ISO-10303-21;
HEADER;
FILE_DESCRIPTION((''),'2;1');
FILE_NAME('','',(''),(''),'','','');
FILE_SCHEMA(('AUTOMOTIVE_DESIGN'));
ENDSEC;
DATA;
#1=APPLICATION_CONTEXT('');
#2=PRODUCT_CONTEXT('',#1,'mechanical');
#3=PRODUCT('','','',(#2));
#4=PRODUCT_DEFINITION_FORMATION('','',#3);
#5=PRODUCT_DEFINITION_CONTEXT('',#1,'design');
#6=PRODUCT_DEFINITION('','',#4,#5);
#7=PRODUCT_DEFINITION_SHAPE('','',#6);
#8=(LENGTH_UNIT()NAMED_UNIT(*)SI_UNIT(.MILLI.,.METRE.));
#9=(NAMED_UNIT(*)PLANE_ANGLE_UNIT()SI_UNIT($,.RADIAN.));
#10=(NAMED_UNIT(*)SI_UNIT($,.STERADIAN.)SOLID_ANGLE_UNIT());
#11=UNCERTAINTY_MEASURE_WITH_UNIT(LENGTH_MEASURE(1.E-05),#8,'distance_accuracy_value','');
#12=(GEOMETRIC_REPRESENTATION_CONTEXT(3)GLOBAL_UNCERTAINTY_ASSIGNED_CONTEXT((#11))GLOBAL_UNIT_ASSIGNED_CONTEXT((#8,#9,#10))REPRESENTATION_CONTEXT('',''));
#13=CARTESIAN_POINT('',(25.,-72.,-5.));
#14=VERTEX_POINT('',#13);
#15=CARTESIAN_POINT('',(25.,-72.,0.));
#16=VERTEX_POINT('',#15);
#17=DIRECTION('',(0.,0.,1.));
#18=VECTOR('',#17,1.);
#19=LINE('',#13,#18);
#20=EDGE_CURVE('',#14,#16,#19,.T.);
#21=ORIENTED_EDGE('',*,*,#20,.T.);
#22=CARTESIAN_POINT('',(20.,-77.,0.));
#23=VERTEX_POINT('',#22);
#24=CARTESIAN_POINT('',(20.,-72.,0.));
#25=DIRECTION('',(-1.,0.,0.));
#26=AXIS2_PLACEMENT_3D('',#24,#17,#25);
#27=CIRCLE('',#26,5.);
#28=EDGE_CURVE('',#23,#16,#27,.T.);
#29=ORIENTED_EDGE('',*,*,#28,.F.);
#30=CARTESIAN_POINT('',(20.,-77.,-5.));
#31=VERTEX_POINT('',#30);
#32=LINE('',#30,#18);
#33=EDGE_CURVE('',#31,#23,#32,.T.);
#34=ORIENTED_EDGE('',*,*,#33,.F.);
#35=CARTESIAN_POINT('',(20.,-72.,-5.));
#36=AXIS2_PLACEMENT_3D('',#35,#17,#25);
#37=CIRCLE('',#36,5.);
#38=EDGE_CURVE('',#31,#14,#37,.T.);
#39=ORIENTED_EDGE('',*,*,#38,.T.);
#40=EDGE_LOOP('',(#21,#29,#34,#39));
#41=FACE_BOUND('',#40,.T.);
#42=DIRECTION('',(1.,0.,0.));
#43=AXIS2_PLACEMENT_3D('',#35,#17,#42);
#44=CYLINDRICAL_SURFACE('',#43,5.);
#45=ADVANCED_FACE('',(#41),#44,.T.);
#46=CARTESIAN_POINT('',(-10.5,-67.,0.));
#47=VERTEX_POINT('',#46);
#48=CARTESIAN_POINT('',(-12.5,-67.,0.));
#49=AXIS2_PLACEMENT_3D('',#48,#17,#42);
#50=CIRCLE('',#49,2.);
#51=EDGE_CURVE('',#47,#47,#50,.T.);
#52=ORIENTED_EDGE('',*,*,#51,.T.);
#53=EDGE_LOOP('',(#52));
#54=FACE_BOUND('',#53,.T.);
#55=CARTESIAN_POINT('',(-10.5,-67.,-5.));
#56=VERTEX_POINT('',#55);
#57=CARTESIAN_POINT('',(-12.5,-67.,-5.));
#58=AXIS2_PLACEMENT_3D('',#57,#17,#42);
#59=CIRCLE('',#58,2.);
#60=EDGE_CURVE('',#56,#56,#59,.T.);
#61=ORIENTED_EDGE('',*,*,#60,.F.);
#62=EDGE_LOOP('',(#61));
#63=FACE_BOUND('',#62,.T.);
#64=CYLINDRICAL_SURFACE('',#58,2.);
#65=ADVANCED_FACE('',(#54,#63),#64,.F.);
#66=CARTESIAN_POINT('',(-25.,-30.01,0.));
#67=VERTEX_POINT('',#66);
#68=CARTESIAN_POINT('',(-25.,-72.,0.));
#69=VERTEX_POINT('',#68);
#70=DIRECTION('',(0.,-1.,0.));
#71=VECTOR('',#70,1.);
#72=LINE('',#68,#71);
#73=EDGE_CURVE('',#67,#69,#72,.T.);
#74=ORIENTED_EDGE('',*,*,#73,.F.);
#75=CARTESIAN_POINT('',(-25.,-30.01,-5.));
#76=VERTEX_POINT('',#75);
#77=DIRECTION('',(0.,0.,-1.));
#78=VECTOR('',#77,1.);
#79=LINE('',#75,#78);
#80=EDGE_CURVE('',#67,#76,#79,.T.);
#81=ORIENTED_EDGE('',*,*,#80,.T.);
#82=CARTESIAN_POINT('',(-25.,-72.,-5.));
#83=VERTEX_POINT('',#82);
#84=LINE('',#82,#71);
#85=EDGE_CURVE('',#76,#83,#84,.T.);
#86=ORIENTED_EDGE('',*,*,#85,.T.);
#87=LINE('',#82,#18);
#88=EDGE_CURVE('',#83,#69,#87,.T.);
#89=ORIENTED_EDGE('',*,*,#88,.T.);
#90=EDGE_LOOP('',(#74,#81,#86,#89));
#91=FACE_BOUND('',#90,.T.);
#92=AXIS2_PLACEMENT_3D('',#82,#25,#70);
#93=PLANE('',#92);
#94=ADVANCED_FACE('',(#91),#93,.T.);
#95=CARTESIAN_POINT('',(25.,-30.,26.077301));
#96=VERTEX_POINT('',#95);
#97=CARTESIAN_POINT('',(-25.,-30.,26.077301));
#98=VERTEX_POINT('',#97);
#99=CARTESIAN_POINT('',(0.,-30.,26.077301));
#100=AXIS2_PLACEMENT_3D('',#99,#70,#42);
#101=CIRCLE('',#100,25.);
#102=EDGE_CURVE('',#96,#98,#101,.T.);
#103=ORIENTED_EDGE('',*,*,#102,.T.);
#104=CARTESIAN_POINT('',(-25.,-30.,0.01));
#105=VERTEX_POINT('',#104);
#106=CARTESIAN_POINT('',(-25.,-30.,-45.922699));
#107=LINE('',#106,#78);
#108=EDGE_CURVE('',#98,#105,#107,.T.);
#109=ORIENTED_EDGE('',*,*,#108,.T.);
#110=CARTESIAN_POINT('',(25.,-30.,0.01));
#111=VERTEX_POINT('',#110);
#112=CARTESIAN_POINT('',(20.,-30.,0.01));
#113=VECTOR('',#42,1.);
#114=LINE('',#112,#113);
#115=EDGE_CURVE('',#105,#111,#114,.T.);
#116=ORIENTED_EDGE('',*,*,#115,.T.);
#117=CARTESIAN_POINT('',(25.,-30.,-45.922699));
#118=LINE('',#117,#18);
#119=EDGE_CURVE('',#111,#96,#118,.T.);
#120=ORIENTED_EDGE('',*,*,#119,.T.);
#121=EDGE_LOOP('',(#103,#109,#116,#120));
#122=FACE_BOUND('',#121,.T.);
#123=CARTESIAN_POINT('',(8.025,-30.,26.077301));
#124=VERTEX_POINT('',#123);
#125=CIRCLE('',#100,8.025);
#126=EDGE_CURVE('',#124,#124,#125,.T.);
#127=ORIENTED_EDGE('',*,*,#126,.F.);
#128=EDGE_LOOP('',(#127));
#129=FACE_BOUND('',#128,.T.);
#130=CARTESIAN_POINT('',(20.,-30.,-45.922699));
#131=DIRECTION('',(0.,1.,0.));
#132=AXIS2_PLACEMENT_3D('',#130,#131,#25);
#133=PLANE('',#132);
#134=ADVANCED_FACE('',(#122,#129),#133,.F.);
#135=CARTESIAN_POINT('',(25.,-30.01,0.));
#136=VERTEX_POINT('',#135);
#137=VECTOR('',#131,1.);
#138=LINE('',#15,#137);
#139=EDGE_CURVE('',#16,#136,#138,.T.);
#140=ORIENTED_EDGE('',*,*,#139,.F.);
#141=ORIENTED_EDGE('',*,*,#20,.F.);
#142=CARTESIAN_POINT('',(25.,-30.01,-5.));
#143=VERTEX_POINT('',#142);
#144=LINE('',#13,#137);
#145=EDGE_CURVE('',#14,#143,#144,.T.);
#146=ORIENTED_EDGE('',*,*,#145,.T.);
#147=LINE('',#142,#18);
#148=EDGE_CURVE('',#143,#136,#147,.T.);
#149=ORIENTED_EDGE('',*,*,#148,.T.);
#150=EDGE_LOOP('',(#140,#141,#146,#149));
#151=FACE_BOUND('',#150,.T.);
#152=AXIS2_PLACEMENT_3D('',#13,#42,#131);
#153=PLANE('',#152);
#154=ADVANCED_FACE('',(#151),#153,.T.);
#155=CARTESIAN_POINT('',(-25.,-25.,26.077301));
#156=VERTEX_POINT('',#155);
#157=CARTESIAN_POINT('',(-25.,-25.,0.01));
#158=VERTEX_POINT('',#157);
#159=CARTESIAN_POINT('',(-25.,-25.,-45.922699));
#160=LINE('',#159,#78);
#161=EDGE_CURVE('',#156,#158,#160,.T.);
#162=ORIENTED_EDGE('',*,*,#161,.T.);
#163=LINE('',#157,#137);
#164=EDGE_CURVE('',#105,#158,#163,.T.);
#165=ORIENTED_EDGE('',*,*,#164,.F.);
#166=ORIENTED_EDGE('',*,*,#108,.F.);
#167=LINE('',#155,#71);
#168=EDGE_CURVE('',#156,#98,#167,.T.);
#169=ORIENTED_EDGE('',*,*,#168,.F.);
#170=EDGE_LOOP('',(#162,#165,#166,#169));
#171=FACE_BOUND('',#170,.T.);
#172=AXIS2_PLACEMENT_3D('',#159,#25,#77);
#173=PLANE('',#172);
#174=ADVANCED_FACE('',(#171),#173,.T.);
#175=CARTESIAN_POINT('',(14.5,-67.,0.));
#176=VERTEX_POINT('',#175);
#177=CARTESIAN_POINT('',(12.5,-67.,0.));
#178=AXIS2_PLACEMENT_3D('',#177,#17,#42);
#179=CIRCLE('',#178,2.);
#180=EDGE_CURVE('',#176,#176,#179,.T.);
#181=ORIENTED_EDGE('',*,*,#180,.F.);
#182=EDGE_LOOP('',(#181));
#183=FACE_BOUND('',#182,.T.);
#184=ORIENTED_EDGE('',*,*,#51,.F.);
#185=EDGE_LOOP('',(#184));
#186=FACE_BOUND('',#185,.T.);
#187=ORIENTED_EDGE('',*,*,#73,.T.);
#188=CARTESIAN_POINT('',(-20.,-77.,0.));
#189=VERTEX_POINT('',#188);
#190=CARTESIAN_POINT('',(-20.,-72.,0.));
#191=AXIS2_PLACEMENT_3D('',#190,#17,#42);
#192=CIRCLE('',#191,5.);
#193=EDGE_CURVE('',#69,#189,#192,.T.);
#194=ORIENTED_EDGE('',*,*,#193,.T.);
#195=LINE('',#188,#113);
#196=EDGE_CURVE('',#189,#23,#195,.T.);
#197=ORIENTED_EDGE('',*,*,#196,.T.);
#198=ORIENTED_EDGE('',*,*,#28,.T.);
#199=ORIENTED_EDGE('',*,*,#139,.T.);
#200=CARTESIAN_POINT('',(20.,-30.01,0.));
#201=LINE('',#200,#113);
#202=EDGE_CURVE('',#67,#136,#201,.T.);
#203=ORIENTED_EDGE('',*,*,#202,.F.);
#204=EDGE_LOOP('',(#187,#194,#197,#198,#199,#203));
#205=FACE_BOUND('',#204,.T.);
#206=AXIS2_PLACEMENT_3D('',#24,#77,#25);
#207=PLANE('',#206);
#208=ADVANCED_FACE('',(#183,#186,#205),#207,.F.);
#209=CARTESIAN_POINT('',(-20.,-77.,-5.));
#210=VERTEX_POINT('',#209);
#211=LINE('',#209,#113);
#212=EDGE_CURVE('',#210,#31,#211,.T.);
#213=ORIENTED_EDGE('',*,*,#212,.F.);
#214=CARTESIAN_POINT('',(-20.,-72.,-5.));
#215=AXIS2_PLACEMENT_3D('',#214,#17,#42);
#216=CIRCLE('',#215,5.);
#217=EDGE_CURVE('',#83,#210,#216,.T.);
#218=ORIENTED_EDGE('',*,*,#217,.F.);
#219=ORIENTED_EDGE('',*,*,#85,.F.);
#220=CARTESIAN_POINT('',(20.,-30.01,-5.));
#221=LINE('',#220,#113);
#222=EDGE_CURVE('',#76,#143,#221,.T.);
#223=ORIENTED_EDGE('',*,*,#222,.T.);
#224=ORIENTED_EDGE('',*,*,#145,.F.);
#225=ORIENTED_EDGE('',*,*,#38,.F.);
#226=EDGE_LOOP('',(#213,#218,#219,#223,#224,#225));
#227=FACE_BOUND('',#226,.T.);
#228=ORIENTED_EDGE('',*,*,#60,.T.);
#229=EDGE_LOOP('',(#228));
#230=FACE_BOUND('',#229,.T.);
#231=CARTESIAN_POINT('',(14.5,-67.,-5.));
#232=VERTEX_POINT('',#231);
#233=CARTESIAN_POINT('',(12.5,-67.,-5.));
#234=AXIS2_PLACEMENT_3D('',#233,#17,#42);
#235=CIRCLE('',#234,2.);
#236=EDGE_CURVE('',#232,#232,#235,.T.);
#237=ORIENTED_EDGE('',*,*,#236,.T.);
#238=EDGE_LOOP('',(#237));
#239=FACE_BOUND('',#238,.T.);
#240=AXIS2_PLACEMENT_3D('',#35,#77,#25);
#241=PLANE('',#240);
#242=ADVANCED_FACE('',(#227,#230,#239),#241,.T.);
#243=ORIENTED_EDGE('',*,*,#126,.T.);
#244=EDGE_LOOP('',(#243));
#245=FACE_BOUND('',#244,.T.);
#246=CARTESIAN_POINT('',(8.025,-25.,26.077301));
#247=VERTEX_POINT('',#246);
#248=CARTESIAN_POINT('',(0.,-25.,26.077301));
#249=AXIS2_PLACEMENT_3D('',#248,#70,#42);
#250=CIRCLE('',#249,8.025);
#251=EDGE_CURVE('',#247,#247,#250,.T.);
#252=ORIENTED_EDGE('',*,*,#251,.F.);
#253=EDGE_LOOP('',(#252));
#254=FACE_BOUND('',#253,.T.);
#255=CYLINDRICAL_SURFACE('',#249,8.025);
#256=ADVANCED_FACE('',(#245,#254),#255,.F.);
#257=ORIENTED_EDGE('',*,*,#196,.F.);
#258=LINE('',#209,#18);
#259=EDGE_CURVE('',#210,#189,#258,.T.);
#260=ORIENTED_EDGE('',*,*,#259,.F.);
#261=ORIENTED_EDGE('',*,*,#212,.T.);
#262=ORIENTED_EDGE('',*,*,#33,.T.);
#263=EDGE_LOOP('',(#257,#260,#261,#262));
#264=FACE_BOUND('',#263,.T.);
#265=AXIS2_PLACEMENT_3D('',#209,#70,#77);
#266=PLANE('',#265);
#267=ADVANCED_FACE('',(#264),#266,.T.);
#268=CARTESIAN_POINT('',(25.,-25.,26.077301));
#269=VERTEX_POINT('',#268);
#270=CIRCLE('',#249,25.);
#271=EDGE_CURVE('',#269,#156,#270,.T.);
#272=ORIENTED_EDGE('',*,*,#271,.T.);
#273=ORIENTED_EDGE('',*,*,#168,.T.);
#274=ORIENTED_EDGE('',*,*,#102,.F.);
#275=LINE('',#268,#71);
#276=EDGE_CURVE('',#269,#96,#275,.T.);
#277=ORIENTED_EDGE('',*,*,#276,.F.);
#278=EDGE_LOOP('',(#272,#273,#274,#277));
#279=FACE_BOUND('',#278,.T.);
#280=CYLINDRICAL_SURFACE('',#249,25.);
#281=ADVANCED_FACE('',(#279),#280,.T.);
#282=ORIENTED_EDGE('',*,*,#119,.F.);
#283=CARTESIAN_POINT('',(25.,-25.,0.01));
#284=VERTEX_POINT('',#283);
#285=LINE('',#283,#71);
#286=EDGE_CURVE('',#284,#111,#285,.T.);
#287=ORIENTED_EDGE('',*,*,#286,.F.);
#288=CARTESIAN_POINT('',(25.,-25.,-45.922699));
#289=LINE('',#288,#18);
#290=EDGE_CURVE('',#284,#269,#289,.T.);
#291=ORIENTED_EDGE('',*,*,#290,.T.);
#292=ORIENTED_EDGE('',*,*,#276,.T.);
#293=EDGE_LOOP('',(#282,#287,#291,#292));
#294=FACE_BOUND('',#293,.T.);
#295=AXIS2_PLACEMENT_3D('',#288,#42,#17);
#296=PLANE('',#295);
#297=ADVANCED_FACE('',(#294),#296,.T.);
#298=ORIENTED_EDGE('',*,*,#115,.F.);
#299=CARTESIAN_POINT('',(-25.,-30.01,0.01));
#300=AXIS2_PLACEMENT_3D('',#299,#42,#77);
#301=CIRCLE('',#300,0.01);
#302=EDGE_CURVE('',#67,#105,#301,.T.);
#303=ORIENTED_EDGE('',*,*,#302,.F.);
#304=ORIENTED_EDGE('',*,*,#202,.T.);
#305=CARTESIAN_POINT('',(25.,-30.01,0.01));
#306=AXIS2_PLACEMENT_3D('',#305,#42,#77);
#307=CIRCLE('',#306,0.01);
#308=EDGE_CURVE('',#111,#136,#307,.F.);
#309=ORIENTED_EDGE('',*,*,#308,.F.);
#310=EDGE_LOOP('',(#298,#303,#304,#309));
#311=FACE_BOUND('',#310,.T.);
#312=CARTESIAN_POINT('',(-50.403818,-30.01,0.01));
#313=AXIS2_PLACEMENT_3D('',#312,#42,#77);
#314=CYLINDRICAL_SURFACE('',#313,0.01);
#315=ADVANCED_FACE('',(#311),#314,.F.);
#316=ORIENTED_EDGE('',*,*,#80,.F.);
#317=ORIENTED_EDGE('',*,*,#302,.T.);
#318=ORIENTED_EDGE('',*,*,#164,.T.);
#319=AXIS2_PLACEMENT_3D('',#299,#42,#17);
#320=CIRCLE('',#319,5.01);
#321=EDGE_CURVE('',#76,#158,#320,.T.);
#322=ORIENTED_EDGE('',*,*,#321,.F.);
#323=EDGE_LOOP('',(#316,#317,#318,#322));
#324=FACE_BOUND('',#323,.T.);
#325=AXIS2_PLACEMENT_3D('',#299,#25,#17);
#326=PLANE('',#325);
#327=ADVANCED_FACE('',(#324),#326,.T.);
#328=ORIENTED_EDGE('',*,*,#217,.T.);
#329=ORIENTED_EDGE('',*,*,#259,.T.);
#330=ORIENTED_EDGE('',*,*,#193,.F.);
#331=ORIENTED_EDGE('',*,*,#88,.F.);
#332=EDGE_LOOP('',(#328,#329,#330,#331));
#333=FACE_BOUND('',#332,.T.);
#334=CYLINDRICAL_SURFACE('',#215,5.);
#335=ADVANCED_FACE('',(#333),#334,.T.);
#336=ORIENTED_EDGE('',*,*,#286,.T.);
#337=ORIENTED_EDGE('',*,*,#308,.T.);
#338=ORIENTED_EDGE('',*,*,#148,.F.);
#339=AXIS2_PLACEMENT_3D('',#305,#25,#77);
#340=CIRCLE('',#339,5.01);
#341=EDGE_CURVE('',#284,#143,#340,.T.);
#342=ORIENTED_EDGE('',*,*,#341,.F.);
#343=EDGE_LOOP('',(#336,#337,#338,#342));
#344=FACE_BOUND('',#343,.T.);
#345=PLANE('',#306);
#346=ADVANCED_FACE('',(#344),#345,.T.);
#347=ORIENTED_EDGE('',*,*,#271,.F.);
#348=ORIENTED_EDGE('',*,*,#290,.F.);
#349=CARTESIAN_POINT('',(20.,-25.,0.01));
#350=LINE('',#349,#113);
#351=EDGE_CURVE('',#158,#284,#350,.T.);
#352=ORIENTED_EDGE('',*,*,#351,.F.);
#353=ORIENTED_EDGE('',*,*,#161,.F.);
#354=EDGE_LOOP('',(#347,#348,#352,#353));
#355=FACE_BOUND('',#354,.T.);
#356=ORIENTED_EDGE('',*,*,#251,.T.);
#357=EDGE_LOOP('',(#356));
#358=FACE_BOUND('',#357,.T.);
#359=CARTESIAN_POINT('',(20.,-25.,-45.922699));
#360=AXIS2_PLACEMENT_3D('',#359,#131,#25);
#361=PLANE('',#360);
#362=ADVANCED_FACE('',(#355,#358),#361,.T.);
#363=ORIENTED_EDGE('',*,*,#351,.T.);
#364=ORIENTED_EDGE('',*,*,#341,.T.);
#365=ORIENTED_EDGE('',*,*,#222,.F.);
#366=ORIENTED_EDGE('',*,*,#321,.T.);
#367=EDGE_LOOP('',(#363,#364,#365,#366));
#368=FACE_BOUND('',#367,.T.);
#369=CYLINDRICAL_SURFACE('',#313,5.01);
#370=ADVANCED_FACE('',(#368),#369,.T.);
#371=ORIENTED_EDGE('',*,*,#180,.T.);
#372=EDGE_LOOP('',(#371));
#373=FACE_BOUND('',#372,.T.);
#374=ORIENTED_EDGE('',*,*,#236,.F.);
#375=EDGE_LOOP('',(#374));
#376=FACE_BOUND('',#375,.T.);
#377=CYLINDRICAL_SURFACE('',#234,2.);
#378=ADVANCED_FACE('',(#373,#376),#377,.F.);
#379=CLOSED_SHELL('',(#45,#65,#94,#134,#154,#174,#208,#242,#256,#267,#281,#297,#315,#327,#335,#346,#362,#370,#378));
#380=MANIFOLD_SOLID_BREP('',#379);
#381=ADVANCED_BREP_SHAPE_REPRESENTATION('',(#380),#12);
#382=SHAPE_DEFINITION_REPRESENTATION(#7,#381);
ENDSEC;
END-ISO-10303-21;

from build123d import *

# Parameters (mm, degrees)
SCHIZZO1_R                           = 8.025
SCHIZZO1_R_2                         = 2
BASE_FLANGIA1_DEPTH                  = 5
PIEGATURA_START                      = -25
PIEGATURA_DELLO_SCHIZZO1_OUTLINE_W   = 50
PIEGATURA_DELLO_SCHIZZO1_OUTLINE_H   = 5
PIEGATURA_DELLO_SCHIZZO1_DEPTH       = 51
PIEGATURA_START_2                    = -30
PIEGATURA_DELLO_SCHIZZO1_2_OUTLINE_R = 8.025
PIEGATURA_DELLO_SCHIZZO1_2_DEPTH     = 5
PIEGATURA_START_3                    = -26
PIEGATURA_DELLO_SCHIZZO1_3_DEPTH     = 51
PIEGATURA_DELLO_SCHIZZO1_4_DEPTH     = 50


with BuildPart() as part:
    # Base-Flangia1: sheet metal written as solids
    # Schizzo1 → Base-Flangia1 (new body)
    with BuildSketch(Plane.XY):
        with BuildLine():
            Line((-25, -72), (-25, 0))
            ThreePointArc((-25, 0), (0, 25), (25, 0))
            Line((25, 0), (25, -72))
            ThreePointArc((25, -72), (23.535533906, -75.535533906), (20, -77))
            Line((20, -77), (-20, -77))
            ThreePointArc((-20, -77), (-23.535533906, -75.535533906), (-25, -72))
        make_face()
        Circle(SCHIZZO1_R, mode=Mode.SUBTRACT)
        with Locations((-12.5, -67)):
            Circle(SCHIZZO1_R_2, mode=Mode.SUBTRACT)
        with Locations((12.5, -67)):
            Circle(SCHIZZO1_R_2, mode=Mode.SUBTRACT)
    extrude(amount=-BASE_FLANGIA1_DEPTH)

    # Piegatura dello schizzo1: read off the stored shape, not the designer's step
    # Piegatura dello schizzo1 outline → Piegatura dello schizzo1 (cut)
    with BuildSketch(Plane(origin=(0, 0, 0), x_dir=(1, 0, 0), z_dir=(0, 1, 0)).offset(PIEGATURA_START)):
        with Locations((0, 2.5)):
            Rectangle(PIEGATURA_DELLO_SCHIZZO1_OUTLINE_W, PIEGATURA_DELLO_SCHIZZO1_OUTLINE_H)
    extrude(amount=PIEGATURA_DELLO_SCHIZZO1_DEPTH, mode=Mode.SUBTRACT)

    # Piegatura dello schizzo1 2 outline → Piegatura dello schizzo1 2 (add)
    with BuildSketch(Plane(origin=(0, 0, 0), x_dir=(1, 0, 0), z_dir=(0, 1, 0)).offset(PIEGATURA_START_2)):
        with BuildLine():
            Line((-25, 0), (-25, -26.07730122))
            ThreePointArc((-25, -26.07730122), (0, -51.07730122), (25, -26.07730122))
            Line((25, -26.07730122), (25, 0))
            Line((25, 0), (-25, 0))
        make_face()
        with Locations((0, -26.07730122)):
            Circle(PIEGATURA_DELLO_SCHIZZO1_2_OUTLINE_R, mode=Mode.SUBTRACT)
    extrude(amount=PIEGATURA_DELLO_SCHIZZO1_2_DEPTH)

    # Piegatura dello schizzo1 3 outline → Piegatura dello schizzo1 3 (cut)
    with BuildSketch(Plane.YZ.offset(PIEGATURA_START_3)):
        with BuildLine():
            ThreePointArc((-25, 0.01), (-26.467395026, -3.532604974), (-30.01, -5))
            Line((-30.01, -5), (-25, -5))
            Line((-25, -5), (-25, 0.01))
        make_face()
    extrude(amount=PIEGATURA_DELLO_SCHIZZO1_3_DEPTH, mode=Mode.SUBTRACT)

    # Piegatura dello schizzo1 4 outline → Piegatura dello schizzo1 4 (add)
    with BuildSketch(Plane.YZ.offset(PIEGATURA_START)):
        with BuildLine():
            ThreePointArc((-30, 0.01), (-30.002928932, 0.002928932), (-30.01, 0))
            Line((-30.01, 0), (-30, 0))
            Line((-30, 0), (-30, 0.01))
        make_face()
    extrude(amount=PIEGATURA_DELLO_SCHIZZO1_4_DEPTH)


solid = part.part
